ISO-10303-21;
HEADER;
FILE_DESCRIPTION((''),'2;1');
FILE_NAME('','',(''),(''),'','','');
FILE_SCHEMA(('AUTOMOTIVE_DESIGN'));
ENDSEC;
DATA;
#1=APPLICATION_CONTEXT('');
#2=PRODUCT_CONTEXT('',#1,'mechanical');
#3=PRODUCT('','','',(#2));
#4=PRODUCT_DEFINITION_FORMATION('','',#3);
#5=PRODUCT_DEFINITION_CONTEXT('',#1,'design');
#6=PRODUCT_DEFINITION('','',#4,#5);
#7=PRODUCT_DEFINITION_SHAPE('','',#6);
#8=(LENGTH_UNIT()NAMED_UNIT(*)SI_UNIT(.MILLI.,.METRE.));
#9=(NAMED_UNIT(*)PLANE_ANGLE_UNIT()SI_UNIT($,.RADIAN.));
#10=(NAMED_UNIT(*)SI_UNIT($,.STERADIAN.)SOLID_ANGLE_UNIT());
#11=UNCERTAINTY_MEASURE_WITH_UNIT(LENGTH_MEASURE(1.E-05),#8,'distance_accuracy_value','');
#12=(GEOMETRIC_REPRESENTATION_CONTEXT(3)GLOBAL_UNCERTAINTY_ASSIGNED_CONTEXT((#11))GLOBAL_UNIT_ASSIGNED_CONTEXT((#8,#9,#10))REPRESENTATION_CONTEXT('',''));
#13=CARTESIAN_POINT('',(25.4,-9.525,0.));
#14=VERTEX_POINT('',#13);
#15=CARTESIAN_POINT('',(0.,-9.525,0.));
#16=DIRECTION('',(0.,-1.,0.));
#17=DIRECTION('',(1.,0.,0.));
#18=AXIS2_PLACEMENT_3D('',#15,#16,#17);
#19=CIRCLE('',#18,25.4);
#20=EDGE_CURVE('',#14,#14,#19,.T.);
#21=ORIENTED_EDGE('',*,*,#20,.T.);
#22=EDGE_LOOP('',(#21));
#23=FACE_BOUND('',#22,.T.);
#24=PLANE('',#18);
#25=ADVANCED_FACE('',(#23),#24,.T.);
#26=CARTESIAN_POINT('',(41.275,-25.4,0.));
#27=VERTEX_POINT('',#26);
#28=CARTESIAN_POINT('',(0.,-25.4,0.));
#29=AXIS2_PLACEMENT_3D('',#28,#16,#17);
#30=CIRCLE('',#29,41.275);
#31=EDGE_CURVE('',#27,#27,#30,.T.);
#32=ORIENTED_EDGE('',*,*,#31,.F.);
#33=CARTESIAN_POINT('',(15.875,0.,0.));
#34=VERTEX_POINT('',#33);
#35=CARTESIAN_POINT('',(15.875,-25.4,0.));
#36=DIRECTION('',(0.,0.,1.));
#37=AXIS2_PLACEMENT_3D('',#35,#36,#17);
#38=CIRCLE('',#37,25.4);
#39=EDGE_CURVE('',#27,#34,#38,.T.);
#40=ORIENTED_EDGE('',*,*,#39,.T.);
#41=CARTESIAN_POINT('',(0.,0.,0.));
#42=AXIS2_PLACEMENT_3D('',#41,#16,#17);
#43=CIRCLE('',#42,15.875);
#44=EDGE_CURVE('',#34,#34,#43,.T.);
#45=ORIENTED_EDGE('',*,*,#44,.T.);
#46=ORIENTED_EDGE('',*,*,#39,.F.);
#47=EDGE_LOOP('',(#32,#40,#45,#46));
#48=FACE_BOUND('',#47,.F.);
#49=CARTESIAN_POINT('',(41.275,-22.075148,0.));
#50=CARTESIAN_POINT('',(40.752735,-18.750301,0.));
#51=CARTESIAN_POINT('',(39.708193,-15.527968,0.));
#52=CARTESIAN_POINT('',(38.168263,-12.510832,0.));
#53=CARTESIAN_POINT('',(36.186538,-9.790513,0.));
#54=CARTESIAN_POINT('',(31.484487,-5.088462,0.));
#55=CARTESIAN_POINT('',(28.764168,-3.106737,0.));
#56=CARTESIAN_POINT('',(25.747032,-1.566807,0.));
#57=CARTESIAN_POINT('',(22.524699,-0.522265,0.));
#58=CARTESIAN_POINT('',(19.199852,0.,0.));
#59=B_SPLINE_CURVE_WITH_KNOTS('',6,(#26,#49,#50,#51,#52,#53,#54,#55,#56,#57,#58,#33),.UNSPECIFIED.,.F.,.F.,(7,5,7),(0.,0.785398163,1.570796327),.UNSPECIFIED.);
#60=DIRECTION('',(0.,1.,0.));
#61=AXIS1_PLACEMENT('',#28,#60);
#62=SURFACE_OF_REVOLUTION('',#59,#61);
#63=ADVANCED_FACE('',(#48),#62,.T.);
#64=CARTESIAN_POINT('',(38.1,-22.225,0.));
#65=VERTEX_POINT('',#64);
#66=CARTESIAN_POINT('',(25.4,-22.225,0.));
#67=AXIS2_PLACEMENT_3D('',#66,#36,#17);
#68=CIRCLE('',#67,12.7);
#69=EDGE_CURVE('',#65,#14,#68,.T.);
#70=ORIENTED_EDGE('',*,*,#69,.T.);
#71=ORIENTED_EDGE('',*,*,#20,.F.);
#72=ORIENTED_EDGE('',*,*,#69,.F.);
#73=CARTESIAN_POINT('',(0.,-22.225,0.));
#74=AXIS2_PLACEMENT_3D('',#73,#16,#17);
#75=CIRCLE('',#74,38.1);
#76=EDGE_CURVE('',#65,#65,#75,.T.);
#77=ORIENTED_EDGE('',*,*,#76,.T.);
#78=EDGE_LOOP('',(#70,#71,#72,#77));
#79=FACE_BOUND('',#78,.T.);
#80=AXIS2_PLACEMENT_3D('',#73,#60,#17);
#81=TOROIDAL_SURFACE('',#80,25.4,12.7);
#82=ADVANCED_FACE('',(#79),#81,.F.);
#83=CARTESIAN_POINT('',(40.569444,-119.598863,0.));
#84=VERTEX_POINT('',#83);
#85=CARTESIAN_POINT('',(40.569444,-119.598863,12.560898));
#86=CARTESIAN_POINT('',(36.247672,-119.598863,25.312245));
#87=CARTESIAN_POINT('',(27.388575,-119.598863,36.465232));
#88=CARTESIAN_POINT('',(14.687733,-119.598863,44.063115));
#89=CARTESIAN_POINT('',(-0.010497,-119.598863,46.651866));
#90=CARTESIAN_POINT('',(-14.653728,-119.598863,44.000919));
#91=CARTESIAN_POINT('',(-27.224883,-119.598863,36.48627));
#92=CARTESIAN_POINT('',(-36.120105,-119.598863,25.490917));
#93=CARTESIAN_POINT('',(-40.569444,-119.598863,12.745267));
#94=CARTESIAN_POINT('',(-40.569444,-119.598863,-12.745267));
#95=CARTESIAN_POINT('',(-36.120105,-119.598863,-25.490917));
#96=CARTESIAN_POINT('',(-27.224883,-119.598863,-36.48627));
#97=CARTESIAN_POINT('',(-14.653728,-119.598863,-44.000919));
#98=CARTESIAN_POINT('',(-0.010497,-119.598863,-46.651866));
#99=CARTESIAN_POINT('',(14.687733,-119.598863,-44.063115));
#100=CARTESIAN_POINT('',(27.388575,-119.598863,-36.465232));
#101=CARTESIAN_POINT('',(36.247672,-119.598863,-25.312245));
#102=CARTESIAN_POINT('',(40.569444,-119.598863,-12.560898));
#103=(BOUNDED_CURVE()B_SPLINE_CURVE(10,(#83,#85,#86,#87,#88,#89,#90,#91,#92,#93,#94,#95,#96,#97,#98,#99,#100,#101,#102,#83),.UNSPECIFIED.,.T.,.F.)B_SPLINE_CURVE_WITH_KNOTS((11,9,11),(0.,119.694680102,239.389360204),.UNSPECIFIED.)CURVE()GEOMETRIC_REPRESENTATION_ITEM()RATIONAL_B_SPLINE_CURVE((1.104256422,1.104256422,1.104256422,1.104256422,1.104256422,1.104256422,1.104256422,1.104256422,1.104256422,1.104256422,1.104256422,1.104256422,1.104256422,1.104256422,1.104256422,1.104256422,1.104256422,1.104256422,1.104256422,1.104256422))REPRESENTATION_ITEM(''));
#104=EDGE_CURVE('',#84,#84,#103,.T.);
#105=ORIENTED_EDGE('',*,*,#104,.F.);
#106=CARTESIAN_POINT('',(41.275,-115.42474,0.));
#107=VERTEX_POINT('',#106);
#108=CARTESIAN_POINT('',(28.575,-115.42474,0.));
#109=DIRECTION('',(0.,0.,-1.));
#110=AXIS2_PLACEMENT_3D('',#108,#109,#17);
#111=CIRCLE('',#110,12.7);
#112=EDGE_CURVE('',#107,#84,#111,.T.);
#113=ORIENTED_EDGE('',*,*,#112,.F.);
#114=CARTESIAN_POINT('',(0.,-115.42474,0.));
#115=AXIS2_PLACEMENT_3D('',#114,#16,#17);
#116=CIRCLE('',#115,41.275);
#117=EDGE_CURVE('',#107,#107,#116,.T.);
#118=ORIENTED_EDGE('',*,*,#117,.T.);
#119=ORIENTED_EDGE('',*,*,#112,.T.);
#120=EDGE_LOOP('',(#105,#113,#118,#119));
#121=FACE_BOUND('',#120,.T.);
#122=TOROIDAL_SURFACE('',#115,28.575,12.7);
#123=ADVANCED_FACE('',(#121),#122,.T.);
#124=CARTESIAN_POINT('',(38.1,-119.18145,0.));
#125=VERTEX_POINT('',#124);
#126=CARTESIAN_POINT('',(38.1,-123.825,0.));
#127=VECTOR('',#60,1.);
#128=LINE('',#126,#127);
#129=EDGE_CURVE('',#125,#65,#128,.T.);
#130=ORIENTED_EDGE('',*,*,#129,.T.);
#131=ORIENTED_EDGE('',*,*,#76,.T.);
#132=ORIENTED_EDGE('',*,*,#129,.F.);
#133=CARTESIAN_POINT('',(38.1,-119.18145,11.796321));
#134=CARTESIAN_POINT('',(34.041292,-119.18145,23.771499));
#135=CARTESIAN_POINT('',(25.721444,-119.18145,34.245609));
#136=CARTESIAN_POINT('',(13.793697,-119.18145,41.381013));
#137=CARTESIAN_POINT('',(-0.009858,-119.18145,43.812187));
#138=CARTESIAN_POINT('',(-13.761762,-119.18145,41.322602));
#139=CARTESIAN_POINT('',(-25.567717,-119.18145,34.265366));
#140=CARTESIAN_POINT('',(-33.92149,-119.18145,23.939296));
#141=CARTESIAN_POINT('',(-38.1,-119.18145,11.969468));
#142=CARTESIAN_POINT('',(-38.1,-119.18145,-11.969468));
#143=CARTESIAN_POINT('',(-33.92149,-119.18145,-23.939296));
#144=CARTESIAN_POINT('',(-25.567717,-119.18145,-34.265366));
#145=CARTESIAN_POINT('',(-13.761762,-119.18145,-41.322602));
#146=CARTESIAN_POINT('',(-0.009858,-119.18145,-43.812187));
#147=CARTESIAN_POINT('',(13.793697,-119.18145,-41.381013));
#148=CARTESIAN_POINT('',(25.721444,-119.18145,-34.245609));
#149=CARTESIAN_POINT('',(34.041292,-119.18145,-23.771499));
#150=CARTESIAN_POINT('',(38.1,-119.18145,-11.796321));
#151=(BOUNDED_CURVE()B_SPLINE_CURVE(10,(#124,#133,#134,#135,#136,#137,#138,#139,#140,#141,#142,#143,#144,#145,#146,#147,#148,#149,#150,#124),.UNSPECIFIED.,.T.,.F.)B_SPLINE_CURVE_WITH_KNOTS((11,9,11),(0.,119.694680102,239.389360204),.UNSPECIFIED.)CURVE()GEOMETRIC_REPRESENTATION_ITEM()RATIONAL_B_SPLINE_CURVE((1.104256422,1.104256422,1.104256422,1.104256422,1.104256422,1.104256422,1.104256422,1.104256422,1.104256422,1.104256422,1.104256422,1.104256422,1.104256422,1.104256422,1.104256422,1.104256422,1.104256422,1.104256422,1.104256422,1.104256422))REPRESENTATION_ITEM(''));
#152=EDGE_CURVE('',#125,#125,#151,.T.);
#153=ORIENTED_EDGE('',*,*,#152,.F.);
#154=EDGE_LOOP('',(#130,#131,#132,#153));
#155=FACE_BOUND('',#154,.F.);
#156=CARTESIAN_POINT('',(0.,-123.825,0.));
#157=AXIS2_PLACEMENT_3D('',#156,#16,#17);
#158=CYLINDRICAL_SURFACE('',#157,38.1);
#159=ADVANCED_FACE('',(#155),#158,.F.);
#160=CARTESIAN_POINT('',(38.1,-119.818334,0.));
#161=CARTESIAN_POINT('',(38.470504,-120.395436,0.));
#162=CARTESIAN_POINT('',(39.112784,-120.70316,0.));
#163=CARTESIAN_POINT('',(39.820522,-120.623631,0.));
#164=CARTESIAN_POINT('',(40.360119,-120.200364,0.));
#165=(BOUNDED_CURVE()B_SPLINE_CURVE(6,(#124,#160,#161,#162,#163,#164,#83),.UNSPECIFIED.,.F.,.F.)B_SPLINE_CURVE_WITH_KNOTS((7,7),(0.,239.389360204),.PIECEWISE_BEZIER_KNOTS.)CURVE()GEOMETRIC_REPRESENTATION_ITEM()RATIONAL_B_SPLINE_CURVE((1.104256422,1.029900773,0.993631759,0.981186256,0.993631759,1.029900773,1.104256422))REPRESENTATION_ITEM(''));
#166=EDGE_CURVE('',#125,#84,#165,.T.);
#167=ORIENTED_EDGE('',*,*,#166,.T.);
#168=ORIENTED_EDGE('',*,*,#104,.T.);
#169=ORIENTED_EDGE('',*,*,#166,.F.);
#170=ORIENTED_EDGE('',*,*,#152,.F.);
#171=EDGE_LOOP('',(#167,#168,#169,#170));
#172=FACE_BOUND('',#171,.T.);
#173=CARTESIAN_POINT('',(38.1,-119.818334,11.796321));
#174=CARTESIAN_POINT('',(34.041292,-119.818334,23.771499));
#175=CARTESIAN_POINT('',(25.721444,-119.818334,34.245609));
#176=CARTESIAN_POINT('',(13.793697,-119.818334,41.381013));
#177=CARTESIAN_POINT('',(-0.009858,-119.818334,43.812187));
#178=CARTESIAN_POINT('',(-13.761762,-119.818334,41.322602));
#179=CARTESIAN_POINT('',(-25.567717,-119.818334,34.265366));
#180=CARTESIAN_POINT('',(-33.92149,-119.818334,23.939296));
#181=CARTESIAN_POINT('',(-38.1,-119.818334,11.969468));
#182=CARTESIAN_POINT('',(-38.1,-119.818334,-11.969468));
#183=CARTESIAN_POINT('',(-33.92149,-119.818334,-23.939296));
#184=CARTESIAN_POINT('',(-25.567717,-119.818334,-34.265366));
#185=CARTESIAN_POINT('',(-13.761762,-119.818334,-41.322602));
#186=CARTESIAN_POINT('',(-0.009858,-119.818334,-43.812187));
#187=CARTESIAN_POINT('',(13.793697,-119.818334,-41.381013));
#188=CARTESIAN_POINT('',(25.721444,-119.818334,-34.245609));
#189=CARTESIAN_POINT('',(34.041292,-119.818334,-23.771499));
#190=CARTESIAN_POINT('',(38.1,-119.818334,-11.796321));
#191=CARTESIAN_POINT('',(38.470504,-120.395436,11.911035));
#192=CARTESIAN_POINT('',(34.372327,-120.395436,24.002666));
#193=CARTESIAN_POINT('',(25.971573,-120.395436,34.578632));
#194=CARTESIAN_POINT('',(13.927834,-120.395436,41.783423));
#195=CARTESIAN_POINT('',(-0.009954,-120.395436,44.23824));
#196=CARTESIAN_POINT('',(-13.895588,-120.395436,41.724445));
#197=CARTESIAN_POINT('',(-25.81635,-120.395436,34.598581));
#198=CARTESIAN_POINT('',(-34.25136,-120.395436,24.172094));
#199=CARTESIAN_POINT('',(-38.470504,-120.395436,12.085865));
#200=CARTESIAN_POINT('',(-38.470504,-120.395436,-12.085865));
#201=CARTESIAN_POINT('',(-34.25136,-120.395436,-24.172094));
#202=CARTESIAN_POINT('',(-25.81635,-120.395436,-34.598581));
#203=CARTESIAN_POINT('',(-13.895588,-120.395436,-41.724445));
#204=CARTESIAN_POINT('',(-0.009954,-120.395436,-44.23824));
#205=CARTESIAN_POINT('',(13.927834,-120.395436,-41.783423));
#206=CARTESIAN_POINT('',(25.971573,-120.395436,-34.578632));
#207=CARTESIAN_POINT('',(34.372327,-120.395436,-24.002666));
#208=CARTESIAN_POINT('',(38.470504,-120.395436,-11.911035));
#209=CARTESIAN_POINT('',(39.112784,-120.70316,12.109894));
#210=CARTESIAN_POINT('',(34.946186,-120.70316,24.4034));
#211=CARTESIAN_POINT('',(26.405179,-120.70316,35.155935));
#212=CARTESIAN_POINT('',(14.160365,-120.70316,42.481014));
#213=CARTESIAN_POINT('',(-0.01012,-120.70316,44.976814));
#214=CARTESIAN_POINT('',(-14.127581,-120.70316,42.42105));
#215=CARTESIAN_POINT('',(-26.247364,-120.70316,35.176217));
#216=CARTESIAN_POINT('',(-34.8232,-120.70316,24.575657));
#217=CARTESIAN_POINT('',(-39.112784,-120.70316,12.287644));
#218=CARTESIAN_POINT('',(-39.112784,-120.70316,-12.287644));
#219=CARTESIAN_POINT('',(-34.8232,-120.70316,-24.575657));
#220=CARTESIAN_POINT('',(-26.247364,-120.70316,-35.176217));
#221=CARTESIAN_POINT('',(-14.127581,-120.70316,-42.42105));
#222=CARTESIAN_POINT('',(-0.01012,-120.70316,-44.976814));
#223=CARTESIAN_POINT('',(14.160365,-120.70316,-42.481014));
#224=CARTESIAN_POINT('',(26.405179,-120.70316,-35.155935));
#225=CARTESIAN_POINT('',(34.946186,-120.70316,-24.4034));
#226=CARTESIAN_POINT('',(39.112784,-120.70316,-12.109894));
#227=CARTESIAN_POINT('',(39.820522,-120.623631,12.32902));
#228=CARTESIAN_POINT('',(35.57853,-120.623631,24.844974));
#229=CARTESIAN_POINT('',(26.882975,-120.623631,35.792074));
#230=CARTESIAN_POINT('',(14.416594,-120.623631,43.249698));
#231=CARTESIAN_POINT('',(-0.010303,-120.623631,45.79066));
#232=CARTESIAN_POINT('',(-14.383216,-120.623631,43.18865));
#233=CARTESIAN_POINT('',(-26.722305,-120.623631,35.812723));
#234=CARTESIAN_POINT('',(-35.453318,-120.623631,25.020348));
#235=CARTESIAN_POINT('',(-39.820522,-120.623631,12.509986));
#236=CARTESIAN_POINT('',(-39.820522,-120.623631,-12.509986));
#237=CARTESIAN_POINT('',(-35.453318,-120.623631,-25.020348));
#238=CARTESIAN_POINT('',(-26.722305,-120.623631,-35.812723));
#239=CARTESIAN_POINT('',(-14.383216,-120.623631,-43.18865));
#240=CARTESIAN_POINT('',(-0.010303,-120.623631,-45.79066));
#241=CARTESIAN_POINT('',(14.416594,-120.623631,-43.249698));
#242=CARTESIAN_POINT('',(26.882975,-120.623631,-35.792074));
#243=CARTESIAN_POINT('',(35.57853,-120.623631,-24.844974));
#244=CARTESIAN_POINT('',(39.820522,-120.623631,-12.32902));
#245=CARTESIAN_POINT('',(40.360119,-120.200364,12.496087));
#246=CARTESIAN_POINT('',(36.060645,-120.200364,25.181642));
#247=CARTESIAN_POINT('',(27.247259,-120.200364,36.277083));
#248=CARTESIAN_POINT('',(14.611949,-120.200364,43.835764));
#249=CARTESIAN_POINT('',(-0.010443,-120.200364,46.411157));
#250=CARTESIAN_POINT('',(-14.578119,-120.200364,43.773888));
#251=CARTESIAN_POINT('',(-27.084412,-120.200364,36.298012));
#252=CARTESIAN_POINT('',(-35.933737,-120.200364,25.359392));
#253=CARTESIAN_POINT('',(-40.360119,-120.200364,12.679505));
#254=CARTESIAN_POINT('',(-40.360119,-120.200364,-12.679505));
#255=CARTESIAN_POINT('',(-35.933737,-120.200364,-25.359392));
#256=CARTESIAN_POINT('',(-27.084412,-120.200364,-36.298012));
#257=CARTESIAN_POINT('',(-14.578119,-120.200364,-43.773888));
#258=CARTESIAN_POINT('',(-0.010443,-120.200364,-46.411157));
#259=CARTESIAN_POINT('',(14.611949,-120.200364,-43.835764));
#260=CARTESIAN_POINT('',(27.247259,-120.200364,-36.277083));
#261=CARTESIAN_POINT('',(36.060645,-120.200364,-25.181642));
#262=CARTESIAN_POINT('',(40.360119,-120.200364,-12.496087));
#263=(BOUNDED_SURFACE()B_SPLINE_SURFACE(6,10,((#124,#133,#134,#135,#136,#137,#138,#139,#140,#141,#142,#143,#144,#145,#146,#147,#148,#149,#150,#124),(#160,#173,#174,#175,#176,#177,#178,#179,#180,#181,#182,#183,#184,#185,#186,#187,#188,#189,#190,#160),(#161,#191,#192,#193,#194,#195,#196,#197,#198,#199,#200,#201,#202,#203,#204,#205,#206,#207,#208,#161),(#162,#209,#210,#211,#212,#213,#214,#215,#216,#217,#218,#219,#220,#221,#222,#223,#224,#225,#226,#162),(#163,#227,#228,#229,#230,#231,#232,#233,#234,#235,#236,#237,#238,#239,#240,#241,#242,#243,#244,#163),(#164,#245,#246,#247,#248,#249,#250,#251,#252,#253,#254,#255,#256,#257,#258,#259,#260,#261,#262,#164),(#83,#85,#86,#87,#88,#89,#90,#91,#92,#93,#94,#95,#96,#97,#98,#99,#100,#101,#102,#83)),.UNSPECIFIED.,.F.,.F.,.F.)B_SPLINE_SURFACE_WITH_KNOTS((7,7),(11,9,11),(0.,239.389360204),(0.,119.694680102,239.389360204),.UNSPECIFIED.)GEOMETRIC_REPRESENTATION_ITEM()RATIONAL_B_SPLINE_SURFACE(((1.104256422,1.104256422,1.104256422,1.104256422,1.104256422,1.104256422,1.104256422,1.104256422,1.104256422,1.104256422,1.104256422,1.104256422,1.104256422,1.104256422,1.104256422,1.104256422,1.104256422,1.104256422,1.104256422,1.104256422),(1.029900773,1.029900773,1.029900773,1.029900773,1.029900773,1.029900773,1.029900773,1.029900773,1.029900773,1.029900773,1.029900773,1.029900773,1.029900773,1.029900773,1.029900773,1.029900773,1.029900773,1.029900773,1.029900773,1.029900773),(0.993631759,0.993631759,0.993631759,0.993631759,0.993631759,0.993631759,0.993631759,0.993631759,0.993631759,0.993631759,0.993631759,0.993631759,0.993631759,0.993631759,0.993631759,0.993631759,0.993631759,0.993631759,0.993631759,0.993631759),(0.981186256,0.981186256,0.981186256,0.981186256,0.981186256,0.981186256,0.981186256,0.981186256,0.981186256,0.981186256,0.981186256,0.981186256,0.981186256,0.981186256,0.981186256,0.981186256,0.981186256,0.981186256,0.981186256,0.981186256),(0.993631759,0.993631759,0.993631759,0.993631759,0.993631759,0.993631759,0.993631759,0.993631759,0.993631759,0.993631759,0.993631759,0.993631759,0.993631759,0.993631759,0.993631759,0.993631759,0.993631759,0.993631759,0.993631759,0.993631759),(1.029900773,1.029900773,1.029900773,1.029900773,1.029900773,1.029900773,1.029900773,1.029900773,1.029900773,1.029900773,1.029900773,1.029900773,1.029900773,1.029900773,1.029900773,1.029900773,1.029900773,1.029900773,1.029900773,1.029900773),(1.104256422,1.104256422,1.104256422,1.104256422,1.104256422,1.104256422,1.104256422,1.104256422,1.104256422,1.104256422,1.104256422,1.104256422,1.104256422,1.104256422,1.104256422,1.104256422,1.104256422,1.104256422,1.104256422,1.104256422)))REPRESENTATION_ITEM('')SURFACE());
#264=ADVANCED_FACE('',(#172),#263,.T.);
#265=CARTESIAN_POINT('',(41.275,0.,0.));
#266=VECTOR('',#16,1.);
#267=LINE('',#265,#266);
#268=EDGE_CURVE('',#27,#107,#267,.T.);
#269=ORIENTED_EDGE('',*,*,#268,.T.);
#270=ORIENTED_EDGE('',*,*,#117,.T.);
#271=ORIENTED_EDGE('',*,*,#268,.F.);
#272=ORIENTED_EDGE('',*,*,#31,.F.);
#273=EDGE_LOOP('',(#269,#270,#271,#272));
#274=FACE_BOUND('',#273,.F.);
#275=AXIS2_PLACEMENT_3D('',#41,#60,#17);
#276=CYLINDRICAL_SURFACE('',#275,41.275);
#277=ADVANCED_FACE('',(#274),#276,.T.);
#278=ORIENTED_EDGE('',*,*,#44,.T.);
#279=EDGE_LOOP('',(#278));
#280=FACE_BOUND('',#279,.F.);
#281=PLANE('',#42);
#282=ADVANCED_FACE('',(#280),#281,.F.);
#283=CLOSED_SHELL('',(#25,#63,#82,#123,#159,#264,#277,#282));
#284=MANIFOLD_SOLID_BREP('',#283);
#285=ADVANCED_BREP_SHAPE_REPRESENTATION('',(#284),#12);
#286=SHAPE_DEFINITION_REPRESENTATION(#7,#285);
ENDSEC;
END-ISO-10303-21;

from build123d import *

# Parameters (mm, degrees)
F0_R     = 41.275
F1_DEPTH = 123.825
F2_R     = 38.1
F3_DEPTH = 114.3
F5_R     = 1.27
F6_R     = 25.4


# Not quite as in the source:
# - a fillet or chamfer that OpenCascade refuses, or shapes differently, is made with other operations: its cross-section is extruded or revolved along the edge and cut away or added


with BuildPart() as f1:
    # F0 (on Front) → F1 (new body)
    with BuildSketch(Plane.XZ):
        Circle(F0_R)
    extrude(amount=F1_DEPTH)

    # F2 (on face) → F3 (cut)
    with BuildSketch(Plane.XZ.offset(123.825)):
        Circle(F2_R)
    extrude(amount=-F3_DEPTH, mode=Mode.SUBTRACT)

    # F4: fillet of radius 12.7 on 2 edges, made by hand

    # F4_s1 → F4_t2 (revolve)
    with BuildSketch(Plane.XY):
        with BuildLine():
            ThreePointArc((38.1, -22.225), (34.3802561211, -13.2447438789), (25.4, -9.525))
            Line((25.4, -9.525), (38.1, -9.525))
            Line((38.1, -9.525), (38.1, -22.225))
        make_face()
    revolve(axis=Axis((0, -9.525, 0), (0, -1, 0)))

    # F4_s3 → F4_t4 (revolve, cut)
    with BuildSketch(Plane.XY):
        with BuildLine():
            ThreePointArc((41.275, -115.4247395874), (40.454762203, -119.9148676479), (38.1, -123.825))
            Line((38.1, -123.825), (41.275, -123.825))
            Line((41.275, -123.825), (41.275, -115.4247395874))
        make_face()
    revolve(axis=Axis((0, -123.825, 0), (0, -1, 0)), mode=Mode.SUBTRACT)

    # F5
    f5_edges = [f1.edges().sort_by_distance(p)[0] for p in [
        (-38.1, -123.825, 0),
    ]]
    fillet(f5_edges, radius=F5_R)

    # F6
    f6_edges = [f1.edges().sort_by_distance(p)[0] for p in [
        (-41.275, 0, 0),
    ]]
    fillet(f6_edges, radius=F6_R)


solid = f1.part
